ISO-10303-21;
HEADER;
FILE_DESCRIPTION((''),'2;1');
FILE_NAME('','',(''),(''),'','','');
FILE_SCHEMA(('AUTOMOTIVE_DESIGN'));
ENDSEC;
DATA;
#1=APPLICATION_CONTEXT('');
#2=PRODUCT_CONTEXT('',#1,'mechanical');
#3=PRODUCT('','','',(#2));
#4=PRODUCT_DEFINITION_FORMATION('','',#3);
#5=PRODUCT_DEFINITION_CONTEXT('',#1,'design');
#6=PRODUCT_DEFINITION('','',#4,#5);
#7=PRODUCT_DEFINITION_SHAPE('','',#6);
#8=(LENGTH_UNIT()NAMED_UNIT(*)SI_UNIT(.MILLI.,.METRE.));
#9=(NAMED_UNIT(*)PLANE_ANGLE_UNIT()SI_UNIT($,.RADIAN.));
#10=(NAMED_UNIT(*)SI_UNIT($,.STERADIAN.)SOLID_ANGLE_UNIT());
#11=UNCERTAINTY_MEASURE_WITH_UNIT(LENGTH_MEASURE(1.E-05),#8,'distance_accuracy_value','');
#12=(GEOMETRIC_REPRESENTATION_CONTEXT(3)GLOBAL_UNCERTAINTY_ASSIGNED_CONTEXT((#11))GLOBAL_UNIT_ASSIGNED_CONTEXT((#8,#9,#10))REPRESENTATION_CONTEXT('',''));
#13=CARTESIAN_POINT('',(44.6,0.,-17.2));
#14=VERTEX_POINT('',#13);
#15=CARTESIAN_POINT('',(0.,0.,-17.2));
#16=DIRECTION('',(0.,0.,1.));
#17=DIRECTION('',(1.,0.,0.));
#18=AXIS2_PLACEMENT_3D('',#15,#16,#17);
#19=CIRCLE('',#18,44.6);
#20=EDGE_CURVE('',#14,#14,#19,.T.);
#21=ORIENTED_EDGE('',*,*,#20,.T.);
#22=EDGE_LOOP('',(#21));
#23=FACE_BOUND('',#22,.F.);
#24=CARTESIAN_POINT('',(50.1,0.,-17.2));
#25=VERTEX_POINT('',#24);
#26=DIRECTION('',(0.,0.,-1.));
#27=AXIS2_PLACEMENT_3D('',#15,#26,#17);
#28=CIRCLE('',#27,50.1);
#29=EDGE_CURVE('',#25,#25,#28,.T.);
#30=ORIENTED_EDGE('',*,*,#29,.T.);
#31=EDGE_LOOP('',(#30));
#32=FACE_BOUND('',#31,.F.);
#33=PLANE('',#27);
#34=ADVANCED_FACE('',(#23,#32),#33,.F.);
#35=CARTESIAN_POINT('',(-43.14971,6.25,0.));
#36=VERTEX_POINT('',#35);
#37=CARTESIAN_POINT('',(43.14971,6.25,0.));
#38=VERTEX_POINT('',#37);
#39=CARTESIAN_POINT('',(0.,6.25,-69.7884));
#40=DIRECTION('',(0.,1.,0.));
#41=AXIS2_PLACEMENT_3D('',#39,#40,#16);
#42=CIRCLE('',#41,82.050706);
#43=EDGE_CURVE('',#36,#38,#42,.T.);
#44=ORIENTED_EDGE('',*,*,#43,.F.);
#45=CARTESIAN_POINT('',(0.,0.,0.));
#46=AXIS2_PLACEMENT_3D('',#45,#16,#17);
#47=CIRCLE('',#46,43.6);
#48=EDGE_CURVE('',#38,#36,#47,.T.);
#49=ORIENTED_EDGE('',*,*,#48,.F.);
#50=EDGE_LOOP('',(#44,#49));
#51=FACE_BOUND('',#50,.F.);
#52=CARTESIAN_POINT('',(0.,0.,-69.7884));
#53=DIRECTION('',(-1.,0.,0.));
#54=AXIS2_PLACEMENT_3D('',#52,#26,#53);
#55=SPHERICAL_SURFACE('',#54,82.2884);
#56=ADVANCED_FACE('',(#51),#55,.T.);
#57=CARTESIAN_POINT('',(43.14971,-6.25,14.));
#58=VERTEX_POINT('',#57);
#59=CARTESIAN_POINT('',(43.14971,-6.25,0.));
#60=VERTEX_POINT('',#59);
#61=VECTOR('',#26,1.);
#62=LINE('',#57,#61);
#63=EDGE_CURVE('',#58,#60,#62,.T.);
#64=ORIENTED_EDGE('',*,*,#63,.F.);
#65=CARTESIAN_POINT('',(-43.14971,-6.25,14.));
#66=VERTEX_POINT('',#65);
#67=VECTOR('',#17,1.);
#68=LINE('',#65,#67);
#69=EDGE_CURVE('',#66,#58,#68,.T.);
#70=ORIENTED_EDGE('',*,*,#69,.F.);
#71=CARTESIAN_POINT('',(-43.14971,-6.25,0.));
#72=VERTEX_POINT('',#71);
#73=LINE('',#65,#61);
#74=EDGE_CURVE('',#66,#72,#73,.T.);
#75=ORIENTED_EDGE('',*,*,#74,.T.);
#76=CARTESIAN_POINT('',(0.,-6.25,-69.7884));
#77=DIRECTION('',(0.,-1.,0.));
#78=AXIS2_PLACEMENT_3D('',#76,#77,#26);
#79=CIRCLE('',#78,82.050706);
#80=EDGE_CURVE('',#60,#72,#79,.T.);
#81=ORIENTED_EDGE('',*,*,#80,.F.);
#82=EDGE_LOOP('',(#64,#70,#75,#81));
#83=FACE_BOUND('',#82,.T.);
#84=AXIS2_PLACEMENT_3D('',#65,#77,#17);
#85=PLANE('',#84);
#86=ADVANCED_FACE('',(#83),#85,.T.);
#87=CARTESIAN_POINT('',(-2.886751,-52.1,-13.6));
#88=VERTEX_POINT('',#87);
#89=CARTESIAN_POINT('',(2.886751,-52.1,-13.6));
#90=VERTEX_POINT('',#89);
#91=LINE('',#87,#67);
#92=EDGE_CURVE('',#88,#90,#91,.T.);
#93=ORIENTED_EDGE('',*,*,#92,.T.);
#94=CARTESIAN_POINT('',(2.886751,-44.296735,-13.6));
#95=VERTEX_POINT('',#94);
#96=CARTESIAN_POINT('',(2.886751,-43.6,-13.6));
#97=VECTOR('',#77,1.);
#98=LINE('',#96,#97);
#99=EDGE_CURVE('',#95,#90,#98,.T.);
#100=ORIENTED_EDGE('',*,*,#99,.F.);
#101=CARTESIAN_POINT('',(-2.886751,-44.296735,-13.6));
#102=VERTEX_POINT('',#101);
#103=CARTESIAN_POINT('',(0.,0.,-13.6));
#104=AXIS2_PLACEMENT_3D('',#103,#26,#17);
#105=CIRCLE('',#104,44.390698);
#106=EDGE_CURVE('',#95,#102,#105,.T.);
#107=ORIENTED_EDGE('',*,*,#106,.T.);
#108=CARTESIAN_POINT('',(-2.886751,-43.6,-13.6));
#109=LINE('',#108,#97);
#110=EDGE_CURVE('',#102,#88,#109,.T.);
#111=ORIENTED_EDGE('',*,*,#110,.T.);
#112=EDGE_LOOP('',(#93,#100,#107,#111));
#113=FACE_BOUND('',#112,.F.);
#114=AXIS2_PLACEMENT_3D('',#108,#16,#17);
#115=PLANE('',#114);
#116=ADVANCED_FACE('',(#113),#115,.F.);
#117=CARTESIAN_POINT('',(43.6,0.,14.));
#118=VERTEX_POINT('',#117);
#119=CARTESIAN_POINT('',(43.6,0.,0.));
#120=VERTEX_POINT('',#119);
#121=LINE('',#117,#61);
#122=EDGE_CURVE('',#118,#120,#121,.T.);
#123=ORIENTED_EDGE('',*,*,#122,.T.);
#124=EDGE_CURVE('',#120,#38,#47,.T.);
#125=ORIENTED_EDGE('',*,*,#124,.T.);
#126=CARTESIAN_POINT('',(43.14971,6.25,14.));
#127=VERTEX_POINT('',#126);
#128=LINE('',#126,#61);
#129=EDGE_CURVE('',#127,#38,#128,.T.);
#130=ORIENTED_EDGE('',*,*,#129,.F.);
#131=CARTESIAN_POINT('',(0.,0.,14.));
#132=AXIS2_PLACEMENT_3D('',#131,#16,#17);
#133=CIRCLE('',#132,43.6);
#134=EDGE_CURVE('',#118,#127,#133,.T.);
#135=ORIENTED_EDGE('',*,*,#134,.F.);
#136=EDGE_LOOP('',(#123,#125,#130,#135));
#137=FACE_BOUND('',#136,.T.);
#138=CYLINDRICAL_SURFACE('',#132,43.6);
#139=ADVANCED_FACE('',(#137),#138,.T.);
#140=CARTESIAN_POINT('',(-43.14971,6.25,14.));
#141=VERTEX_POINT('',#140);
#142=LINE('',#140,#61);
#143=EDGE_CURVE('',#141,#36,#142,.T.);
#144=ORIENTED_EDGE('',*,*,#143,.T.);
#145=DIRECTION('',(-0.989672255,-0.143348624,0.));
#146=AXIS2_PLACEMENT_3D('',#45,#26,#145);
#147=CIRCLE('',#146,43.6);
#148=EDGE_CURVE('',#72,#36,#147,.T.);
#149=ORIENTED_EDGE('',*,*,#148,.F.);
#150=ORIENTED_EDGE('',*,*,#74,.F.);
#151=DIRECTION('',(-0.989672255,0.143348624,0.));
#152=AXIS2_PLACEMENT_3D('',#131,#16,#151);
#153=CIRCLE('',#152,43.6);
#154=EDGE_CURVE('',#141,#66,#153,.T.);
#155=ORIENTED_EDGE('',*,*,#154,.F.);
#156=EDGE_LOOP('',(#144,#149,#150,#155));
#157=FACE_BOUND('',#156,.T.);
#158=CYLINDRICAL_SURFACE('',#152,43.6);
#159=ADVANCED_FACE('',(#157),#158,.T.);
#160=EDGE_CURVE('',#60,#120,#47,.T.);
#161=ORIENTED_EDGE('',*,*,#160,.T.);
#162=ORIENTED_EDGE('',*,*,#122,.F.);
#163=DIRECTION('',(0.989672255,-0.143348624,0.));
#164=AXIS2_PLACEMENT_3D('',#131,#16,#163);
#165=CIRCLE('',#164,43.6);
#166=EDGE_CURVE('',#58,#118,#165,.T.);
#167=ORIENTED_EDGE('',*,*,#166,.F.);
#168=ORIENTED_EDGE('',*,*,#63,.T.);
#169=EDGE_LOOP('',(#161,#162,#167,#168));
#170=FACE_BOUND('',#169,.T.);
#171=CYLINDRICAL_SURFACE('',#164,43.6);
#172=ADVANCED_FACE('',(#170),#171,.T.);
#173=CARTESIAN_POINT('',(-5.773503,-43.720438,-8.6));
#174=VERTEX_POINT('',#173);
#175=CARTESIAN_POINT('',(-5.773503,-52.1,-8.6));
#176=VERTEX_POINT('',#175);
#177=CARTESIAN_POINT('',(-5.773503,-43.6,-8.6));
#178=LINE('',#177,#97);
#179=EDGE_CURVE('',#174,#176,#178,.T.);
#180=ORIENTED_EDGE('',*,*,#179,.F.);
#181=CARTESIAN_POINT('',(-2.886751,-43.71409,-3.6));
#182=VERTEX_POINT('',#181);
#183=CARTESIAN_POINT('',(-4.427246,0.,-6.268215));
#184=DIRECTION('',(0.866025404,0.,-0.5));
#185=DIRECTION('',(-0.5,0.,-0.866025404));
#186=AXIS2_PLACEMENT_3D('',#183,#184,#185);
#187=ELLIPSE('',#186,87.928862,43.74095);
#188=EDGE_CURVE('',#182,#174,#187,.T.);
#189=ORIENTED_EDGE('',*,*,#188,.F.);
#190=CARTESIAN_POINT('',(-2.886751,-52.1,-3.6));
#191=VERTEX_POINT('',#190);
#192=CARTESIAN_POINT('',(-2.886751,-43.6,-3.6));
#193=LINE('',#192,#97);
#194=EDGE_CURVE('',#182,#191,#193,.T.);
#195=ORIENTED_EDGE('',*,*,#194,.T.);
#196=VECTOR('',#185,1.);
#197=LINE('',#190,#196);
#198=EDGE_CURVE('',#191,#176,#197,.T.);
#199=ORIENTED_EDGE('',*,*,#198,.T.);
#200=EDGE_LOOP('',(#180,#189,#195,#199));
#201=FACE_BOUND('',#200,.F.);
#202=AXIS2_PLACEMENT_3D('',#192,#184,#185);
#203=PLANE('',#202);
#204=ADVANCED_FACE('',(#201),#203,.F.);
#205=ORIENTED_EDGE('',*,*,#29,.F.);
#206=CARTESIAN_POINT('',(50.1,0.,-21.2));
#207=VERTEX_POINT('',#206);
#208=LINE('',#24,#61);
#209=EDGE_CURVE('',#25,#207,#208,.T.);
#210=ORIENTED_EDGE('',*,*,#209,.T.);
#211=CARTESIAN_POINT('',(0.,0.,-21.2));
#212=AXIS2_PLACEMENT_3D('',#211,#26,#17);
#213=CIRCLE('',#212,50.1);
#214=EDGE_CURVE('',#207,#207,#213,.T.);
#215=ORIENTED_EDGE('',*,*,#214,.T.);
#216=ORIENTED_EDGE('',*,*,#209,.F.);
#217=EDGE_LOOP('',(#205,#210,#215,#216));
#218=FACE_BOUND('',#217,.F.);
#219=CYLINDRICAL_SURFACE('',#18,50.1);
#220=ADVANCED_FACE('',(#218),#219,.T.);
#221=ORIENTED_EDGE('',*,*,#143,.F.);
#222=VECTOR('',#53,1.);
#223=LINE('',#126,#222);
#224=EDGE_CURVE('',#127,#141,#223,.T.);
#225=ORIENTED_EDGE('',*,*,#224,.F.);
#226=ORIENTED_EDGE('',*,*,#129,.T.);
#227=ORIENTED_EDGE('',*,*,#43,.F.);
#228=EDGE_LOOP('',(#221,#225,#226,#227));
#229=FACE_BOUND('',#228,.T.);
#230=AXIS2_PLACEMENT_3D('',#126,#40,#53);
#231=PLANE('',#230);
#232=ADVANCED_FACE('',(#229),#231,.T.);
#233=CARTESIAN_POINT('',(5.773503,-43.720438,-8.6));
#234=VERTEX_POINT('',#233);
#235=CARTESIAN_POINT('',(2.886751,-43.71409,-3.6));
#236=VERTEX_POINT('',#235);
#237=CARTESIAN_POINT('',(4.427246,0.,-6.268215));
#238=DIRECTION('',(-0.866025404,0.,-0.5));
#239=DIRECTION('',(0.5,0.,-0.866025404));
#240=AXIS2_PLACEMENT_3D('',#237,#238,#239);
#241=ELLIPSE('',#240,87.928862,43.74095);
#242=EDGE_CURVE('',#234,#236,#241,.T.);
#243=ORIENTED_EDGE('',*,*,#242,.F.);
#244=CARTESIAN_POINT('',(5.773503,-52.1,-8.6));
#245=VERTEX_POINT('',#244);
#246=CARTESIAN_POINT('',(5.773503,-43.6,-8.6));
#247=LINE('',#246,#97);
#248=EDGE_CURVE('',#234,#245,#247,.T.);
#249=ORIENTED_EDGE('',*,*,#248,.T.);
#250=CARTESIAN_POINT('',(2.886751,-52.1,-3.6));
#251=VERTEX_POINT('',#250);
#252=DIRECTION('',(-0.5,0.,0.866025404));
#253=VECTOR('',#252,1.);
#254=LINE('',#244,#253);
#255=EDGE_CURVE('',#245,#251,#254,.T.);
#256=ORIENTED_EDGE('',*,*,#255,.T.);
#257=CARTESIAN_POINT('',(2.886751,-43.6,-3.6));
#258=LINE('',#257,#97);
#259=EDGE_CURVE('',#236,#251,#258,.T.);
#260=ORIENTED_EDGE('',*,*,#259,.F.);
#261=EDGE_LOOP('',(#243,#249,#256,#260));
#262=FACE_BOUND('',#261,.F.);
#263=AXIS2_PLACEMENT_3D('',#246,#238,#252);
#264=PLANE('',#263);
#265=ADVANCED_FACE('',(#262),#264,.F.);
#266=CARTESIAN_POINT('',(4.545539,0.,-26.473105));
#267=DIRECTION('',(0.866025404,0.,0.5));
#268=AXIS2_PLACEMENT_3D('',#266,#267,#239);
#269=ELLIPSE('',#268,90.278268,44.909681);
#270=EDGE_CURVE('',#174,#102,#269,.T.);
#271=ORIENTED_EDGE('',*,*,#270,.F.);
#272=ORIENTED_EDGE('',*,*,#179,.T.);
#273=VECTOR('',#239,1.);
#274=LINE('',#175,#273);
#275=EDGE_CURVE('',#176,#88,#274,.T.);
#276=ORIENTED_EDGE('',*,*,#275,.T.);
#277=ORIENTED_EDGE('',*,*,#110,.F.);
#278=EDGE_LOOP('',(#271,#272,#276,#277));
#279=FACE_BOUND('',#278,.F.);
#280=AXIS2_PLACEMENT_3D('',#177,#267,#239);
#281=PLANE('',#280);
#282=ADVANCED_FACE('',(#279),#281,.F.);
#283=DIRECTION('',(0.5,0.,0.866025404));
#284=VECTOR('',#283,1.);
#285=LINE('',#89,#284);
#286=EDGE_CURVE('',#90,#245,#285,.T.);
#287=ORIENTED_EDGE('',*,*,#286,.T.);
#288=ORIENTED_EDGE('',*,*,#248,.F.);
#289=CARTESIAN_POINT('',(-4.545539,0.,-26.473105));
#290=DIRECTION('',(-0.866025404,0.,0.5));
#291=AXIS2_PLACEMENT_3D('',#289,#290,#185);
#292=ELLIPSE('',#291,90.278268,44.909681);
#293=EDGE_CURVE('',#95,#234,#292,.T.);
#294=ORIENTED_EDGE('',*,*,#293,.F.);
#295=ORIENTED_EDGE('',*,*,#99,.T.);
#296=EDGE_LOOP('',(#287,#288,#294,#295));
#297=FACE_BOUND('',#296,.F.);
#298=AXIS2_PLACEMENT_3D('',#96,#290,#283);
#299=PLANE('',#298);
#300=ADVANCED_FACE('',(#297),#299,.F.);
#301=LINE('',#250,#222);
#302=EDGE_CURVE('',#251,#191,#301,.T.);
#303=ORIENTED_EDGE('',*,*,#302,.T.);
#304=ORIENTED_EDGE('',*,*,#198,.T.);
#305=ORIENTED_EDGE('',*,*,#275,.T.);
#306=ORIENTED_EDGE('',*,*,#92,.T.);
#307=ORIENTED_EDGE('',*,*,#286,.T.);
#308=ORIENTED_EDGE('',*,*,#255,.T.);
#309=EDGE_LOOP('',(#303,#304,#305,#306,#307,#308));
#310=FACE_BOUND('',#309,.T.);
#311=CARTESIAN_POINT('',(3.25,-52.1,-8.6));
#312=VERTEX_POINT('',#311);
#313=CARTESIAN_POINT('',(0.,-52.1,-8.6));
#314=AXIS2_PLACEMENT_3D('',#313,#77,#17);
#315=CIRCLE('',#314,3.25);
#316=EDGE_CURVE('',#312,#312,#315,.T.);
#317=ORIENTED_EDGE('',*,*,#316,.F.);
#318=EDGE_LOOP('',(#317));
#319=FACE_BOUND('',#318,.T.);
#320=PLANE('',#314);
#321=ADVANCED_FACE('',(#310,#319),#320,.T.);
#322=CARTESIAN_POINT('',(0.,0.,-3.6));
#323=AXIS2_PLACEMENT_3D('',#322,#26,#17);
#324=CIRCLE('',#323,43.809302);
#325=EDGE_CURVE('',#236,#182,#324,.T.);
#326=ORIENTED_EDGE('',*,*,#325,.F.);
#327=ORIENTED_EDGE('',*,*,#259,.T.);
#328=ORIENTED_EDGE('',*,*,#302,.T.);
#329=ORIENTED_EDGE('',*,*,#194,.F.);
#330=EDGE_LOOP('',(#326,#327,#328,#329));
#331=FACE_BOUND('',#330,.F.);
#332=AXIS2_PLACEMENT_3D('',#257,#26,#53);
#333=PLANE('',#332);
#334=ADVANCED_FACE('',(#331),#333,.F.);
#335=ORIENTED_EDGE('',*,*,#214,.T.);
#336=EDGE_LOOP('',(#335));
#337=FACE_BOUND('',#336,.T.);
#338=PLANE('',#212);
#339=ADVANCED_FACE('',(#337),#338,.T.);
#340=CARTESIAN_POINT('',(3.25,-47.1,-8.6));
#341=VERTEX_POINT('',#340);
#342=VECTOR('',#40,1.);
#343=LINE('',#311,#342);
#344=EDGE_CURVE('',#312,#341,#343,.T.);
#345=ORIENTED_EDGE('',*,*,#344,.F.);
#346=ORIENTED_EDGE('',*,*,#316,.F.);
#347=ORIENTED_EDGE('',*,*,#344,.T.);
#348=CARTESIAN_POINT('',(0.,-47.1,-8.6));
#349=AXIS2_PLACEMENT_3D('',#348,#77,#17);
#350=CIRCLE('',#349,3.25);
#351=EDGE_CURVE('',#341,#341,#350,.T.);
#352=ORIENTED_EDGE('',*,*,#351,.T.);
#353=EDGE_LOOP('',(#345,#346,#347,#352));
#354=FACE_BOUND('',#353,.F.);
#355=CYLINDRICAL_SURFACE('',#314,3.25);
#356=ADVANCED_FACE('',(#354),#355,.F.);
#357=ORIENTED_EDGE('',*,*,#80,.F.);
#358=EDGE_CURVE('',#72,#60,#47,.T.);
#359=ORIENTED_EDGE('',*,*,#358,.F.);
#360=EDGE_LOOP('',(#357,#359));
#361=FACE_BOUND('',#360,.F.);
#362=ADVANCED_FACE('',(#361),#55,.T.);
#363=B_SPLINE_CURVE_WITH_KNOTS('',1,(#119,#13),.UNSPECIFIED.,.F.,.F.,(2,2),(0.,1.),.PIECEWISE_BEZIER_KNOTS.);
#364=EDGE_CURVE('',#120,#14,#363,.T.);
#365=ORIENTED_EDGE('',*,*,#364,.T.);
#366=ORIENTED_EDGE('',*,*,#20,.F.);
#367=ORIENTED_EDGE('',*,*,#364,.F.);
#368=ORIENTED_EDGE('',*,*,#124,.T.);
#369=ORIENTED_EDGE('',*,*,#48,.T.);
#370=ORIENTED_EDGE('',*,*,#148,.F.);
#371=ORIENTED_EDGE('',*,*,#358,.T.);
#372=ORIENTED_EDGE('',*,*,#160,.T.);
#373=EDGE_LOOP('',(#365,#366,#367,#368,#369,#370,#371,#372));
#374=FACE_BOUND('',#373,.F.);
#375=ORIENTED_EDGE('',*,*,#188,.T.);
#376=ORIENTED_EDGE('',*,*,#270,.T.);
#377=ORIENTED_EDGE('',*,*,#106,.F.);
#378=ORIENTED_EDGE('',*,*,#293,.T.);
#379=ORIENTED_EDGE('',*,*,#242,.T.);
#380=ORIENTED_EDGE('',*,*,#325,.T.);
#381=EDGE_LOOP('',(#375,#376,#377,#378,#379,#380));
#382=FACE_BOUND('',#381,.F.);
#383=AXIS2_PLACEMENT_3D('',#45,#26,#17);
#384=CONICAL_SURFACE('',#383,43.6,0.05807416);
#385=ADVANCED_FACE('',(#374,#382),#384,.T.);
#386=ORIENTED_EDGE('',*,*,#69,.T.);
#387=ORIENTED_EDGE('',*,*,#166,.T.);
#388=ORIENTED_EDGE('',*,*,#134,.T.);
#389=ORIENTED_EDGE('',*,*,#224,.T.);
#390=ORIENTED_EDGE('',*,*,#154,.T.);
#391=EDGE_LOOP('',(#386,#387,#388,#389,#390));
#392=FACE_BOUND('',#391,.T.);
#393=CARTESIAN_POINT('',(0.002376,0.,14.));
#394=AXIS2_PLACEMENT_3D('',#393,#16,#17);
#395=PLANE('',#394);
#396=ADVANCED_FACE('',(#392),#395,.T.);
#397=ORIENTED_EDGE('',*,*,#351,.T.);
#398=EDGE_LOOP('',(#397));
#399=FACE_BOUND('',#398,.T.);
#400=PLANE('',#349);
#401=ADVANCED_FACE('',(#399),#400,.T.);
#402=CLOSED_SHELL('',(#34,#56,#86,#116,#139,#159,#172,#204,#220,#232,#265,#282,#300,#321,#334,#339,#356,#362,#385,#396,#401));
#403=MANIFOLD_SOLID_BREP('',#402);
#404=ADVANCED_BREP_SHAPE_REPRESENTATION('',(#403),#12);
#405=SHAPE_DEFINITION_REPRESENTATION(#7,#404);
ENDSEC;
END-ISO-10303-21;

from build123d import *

# Parameters (mm, degrees)
F0_R      = 43.6
F2_R      = 44.6
F4_R      = 50.1
F4_R_2    = 44.6
F5_DEPTH  = 4
F13_DEPTH = 8.5
F14_R     = 3.25
F15_DEPTH = 5


with BuildPart() as f3:
    # F0 (on Top) → F3 section 0
    with BuildSketch(Plane.XY):
        Circle(F0_R)
    # F2 (on offset) → F3 section 1
    with BuildSketch(Plane.XY.offset(-17.2)):
        Circle(F2_R)
    loft()

    # F4 (on face) → F5 (join)
    with BuildSketch(Plane(origin=(0, 0, -17.2), x_dir=(1, 0, 0), z_dir=(0, 0, -1))):
        Circle(F4_R)
        Circle(F4_R_2, mode=Mode.SUBTRACT)
        Circle(F4_R_2)
    extrude(amount=F5_DEPTH)

    # F6 (on Front) → F7 (revolve)
    with BuildSketch(Plane.XZ):
        with BuildLine():
            Line((-43.6, 0), (0, 0))
            Line((0, 0), (0, 12.5))
            ThreePointArc((0, 12.5), (-22.6782384677, 9.3132957755), (-43.6, 0))
        make_face()
    revolve(axis=Axis((0, 0, 11.7095857859), (0, 0, 1)))

    # F9 (on offset) → F10 (join, up to the next surface of F3)
    with BuildSketch(Plane.XY.offset(14)):
        with BuildLine():
            ThreePointArc((43.6, 0), (43.4872818741, 3.1330999347), (43.1497103119, 6.25))
            Line((43.1497103119, 6.25), (-43.1497103119, 6.25))
            ThreePointArc((-43.1497103119, 6.25), (-43.6, 0), (-43.1497103119, -6.25))
            Line((-43.1497103119, -6.25), (43.1497103119, -6.25))
            ThreePointArc((43.1497103119, -6.25), (43.4872818741, -3.1330999347), (43.6, 0))
        make_face()
    extrude(until=Until.NEXT, dir=(0, 0, -1))

    # F12 (on offset) → F13 (join)
    with BuildSketch(Plane.XZ.offset(43.6)):
        Polygon((2.8867513459, -13.6), (5.7735026919, -8.6), (2.8867513459, -3.6), (-2.8867513459, -3.6), (-5.7735026919, -8.6), (-2.8867513459, -13.6), align=None)
    extrude(amount=F13_DEPTH)

    # F14 (on face) → F15 (cut)
    with BuildSketch(Plane.XZ.offset(52.1)):
        with Locations((0, -8.6)):
            Circle(F14_R)
    extrude(amount=-F15_DEPTH, mode=Mode.SUBTRACT)


solid = f3.part
